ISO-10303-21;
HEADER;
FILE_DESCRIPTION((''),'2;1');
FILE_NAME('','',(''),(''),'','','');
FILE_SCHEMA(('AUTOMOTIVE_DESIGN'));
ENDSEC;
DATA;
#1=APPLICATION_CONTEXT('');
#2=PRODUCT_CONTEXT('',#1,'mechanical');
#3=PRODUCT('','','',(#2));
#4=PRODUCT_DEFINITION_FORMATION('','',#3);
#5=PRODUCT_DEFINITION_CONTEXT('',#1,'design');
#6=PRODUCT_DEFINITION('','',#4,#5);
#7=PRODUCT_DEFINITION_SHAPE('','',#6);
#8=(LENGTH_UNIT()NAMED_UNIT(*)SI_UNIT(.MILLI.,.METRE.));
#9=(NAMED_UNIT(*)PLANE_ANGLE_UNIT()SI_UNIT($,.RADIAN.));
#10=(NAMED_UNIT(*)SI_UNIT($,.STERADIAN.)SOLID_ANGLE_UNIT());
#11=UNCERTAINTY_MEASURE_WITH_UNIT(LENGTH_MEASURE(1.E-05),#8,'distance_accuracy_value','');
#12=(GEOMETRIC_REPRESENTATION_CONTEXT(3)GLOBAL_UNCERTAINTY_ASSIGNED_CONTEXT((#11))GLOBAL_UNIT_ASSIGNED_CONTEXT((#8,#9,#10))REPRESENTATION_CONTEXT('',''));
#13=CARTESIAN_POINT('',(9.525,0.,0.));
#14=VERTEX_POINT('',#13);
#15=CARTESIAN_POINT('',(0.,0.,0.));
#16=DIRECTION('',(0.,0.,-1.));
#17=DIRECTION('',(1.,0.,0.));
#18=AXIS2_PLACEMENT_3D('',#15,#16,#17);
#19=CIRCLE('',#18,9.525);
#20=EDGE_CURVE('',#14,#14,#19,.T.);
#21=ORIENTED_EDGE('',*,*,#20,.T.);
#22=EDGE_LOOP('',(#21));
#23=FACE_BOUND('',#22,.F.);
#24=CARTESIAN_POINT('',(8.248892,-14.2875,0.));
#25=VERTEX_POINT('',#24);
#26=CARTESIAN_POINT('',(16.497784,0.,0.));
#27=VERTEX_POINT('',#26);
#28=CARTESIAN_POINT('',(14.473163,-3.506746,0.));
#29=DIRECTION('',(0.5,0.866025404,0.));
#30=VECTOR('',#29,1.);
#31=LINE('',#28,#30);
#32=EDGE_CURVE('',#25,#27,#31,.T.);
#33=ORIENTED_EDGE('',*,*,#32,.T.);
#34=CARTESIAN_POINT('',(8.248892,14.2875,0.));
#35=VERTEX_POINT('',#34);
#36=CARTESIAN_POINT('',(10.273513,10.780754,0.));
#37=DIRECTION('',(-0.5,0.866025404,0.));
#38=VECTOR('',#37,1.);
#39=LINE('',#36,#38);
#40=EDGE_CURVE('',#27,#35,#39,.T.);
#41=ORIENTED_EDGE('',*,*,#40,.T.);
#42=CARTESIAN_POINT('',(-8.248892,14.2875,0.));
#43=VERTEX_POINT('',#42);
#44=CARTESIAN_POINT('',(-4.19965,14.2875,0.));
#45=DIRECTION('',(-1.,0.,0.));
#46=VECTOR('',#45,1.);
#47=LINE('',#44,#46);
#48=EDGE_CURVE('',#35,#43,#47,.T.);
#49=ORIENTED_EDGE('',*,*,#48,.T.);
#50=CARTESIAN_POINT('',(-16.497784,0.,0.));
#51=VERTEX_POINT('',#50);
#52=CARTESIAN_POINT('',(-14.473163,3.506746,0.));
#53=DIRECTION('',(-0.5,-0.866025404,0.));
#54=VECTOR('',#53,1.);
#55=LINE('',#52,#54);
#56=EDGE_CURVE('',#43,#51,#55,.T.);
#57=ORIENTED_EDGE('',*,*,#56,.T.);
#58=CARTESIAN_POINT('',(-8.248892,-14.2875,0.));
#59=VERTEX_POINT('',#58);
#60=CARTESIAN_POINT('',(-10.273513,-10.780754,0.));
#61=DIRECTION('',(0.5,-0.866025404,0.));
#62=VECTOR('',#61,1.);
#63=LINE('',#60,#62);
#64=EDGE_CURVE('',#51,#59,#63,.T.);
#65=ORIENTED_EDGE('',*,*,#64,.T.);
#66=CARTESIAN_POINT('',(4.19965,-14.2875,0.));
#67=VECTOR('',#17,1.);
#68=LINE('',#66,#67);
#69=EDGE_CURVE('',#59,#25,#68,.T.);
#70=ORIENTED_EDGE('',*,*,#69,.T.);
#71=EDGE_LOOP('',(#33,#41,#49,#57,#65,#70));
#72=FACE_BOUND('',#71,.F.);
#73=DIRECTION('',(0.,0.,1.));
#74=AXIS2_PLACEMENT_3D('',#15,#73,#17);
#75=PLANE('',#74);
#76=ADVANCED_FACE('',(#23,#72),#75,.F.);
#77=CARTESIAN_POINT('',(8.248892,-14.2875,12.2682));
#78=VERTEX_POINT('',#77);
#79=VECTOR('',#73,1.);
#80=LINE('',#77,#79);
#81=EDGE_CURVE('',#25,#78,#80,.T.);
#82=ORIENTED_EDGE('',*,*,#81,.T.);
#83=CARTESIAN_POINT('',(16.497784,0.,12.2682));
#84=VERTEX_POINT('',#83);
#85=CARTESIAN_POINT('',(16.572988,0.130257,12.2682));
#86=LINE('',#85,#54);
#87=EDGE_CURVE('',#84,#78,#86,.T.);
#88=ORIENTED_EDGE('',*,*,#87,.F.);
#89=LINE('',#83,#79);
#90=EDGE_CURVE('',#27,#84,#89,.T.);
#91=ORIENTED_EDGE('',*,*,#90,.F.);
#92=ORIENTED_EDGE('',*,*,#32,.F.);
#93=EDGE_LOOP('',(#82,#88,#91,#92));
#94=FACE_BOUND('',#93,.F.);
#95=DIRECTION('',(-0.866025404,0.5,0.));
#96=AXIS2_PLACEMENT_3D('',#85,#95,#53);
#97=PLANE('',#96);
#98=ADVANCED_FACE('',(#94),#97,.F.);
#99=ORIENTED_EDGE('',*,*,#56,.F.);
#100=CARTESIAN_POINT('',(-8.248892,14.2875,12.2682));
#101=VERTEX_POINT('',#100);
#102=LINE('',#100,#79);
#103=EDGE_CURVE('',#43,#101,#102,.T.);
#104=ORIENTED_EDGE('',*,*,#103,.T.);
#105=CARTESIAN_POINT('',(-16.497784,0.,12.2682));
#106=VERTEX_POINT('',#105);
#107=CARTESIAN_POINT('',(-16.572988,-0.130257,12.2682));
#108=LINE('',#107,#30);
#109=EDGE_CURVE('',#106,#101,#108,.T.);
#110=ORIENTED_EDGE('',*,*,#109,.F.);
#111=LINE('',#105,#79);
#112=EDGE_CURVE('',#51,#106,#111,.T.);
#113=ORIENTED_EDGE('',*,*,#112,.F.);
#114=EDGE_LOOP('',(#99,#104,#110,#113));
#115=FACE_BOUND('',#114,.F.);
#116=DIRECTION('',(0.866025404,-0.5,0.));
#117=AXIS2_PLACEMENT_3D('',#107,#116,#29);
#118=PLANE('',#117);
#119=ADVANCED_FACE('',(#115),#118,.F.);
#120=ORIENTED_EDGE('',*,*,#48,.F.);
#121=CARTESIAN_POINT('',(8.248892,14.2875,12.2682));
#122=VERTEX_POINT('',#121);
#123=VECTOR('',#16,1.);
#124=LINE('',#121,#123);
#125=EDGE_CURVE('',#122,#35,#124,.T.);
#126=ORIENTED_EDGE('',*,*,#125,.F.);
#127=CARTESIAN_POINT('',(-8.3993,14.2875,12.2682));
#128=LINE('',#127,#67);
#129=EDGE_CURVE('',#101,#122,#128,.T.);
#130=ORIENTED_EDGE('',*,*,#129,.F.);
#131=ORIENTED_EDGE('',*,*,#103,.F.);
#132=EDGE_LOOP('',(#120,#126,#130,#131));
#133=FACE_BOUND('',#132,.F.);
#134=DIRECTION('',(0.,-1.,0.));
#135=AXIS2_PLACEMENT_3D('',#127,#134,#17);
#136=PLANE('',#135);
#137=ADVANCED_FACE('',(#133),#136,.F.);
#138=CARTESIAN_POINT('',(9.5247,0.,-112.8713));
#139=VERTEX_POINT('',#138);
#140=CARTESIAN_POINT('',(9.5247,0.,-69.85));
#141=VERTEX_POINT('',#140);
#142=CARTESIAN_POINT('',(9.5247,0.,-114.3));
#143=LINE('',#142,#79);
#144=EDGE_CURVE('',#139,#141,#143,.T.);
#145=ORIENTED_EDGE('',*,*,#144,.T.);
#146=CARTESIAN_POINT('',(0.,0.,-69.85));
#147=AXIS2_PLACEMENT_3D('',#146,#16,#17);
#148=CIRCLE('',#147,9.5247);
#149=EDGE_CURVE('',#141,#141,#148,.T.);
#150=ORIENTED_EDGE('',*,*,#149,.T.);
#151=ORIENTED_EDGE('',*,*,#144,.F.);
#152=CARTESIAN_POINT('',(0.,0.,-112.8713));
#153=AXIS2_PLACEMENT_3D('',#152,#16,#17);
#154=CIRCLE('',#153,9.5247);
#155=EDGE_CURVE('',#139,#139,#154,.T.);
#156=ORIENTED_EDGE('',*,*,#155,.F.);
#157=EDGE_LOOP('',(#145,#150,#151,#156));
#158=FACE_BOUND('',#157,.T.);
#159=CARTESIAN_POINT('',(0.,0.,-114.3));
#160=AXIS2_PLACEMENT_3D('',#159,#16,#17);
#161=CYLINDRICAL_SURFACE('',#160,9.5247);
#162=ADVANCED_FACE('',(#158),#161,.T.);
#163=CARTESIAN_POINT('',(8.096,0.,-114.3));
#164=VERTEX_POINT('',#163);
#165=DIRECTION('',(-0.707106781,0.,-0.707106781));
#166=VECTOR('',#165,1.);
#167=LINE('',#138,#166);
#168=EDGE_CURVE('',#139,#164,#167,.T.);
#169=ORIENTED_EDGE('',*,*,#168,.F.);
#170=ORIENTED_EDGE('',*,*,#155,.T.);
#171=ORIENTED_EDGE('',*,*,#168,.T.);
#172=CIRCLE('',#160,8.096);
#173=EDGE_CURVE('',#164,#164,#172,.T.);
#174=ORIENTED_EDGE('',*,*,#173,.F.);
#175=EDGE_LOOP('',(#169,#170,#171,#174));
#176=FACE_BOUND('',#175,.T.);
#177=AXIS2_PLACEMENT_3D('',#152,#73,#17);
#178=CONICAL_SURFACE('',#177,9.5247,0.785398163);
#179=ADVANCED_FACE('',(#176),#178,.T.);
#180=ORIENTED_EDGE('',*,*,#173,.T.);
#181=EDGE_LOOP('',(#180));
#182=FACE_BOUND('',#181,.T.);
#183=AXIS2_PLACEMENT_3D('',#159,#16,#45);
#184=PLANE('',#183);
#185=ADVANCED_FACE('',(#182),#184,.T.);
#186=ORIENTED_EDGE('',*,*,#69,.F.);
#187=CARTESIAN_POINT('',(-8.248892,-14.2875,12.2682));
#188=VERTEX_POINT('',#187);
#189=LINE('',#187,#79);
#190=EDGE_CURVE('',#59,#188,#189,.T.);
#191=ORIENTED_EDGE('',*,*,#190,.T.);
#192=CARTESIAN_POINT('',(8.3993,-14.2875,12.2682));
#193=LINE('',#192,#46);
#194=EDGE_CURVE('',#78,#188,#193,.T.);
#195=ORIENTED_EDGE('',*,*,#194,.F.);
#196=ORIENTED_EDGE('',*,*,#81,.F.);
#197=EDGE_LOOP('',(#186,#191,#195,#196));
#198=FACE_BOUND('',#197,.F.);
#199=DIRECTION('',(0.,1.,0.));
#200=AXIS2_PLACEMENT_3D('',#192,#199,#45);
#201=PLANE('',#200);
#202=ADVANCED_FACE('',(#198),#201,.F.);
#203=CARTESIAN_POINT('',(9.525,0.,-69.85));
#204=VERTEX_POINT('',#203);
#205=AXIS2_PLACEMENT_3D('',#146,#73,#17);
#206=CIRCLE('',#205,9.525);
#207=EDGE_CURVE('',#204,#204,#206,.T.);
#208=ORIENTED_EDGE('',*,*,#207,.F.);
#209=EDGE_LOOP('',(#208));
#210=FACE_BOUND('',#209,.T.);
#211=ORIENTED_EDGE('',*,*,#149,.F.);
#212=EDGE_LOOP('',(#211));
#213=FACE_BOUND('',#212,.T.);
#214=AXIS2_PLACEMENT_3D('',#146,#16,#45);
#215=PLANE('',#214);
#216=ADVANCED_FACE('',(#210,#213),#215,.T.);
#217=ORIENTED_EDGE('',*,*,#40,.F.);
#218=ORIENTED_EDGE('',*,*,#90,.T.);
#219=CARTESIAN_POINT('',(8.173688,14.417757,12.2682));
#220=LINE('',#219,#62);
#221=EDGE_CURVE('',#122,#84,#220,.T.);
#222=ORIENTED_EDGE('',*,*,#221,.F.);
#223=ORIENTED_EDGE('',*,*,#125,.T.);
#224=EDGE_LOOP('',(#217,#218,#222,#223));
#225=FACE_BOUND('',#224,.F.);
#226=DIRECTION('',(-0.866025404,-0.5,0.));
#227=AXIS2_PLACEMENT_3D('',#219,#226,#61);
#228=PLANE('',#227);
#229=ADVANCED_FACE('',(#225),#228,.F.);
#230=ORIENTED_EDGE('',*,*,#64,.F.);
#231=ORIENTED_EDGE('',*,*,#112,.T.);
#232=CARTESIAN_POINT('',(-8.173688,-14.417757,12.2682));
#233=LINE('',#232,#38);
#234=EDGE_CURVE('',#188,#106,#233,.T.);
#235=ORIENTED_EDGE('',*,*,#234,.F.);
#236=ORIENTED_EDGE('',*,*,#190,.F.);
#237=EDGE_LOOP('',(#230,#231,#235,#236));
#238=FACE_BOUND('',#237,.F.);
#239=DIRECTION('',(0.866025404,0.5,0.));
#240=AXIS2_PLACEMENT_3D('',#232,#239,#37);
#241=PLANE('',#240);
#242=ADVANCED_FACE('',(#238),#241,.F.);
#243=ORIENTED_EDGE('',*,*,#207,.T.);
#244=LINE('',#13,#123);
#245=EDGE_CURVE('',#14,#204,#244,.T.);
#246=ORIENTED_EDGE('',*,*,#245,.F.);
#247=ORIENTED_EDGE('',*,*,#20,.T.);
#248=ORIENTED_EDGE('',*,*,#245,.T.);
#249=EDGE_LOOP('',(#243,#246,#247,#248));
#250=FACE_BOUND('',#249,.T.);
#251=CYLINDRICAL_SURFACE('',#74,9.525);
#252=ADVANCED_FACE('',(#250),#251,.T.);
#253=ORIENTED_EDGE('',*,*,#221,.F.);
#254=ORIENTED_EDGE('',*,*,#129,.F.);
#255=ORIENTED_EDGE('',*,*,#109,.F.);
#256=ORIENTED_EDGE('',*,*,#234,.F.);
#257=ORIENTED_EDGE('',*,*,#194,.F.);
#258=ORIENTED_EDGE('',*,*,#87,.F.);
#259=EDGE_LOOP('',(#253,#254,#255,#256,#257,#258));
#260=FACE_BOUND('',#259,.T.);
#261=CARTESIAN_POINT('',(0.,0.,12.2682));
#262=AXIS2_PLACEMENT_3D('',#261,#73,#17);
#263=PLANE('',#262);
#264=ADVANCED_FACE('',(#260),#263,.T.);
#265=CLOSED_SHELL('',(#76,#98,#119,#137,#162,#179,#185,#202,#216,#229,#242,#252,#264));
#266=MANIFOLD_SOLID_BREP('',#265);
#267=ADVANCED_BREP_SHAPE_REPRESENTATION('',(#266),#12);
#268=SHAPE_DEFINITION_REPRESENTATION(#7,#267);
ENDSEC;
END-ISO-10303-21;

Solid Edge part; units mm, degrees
sketch "Sketch1" plane through (0, 0, 0) normal (0, 0, 1) x (1, 0, 0)
  circle A0 centre (0, 0) radius 16.5735
  dimension "D1" = 33.147
extrude "Protrusion1" add sketch "Sketch1" along normal blind 12.2682
sketch "Sketch2" plane through (0, 0, 0) normal (0, 0, -1) x (1, 0, 0)
  circle A0 centre (0, 0) radius 9.525
extrude "Protrusion2" add sketch "Sketch2" along normal blind 114.3
sketch "Sketch3" plane through (0, 0, -114.3) normal (0, 0, -1) x (1, 0, 0)
  circle A0 centre (0, 0) radius 9.5247
extrude "Cutout1" cut sketch "Sketch3" against normal blind 44.45 flip side to cut
chamfer "Chamfer_1" distance 1.4287 angle 45 1 edges at (-9.5247, 0, -114.3)
sketch "Sketch4" plane through (0, 0, 12.2682) normal (0, 0, 1) x (1, 0, 0)
  line L0 (-8.3993, 14.2875) -> (8.3993, 14.2875)
  dimension "D1" = 28.575
extrude "Cutout2" cut sketch "Sketch4" against normal up to next material side at (0, 14.3375, 12.2682)
pattern_circular "Pattern1" count 6 over 360 about axis through (0, 0, 12.2682) along (0, 0, 1) of "Cutout2"
properties part number "24107300"
